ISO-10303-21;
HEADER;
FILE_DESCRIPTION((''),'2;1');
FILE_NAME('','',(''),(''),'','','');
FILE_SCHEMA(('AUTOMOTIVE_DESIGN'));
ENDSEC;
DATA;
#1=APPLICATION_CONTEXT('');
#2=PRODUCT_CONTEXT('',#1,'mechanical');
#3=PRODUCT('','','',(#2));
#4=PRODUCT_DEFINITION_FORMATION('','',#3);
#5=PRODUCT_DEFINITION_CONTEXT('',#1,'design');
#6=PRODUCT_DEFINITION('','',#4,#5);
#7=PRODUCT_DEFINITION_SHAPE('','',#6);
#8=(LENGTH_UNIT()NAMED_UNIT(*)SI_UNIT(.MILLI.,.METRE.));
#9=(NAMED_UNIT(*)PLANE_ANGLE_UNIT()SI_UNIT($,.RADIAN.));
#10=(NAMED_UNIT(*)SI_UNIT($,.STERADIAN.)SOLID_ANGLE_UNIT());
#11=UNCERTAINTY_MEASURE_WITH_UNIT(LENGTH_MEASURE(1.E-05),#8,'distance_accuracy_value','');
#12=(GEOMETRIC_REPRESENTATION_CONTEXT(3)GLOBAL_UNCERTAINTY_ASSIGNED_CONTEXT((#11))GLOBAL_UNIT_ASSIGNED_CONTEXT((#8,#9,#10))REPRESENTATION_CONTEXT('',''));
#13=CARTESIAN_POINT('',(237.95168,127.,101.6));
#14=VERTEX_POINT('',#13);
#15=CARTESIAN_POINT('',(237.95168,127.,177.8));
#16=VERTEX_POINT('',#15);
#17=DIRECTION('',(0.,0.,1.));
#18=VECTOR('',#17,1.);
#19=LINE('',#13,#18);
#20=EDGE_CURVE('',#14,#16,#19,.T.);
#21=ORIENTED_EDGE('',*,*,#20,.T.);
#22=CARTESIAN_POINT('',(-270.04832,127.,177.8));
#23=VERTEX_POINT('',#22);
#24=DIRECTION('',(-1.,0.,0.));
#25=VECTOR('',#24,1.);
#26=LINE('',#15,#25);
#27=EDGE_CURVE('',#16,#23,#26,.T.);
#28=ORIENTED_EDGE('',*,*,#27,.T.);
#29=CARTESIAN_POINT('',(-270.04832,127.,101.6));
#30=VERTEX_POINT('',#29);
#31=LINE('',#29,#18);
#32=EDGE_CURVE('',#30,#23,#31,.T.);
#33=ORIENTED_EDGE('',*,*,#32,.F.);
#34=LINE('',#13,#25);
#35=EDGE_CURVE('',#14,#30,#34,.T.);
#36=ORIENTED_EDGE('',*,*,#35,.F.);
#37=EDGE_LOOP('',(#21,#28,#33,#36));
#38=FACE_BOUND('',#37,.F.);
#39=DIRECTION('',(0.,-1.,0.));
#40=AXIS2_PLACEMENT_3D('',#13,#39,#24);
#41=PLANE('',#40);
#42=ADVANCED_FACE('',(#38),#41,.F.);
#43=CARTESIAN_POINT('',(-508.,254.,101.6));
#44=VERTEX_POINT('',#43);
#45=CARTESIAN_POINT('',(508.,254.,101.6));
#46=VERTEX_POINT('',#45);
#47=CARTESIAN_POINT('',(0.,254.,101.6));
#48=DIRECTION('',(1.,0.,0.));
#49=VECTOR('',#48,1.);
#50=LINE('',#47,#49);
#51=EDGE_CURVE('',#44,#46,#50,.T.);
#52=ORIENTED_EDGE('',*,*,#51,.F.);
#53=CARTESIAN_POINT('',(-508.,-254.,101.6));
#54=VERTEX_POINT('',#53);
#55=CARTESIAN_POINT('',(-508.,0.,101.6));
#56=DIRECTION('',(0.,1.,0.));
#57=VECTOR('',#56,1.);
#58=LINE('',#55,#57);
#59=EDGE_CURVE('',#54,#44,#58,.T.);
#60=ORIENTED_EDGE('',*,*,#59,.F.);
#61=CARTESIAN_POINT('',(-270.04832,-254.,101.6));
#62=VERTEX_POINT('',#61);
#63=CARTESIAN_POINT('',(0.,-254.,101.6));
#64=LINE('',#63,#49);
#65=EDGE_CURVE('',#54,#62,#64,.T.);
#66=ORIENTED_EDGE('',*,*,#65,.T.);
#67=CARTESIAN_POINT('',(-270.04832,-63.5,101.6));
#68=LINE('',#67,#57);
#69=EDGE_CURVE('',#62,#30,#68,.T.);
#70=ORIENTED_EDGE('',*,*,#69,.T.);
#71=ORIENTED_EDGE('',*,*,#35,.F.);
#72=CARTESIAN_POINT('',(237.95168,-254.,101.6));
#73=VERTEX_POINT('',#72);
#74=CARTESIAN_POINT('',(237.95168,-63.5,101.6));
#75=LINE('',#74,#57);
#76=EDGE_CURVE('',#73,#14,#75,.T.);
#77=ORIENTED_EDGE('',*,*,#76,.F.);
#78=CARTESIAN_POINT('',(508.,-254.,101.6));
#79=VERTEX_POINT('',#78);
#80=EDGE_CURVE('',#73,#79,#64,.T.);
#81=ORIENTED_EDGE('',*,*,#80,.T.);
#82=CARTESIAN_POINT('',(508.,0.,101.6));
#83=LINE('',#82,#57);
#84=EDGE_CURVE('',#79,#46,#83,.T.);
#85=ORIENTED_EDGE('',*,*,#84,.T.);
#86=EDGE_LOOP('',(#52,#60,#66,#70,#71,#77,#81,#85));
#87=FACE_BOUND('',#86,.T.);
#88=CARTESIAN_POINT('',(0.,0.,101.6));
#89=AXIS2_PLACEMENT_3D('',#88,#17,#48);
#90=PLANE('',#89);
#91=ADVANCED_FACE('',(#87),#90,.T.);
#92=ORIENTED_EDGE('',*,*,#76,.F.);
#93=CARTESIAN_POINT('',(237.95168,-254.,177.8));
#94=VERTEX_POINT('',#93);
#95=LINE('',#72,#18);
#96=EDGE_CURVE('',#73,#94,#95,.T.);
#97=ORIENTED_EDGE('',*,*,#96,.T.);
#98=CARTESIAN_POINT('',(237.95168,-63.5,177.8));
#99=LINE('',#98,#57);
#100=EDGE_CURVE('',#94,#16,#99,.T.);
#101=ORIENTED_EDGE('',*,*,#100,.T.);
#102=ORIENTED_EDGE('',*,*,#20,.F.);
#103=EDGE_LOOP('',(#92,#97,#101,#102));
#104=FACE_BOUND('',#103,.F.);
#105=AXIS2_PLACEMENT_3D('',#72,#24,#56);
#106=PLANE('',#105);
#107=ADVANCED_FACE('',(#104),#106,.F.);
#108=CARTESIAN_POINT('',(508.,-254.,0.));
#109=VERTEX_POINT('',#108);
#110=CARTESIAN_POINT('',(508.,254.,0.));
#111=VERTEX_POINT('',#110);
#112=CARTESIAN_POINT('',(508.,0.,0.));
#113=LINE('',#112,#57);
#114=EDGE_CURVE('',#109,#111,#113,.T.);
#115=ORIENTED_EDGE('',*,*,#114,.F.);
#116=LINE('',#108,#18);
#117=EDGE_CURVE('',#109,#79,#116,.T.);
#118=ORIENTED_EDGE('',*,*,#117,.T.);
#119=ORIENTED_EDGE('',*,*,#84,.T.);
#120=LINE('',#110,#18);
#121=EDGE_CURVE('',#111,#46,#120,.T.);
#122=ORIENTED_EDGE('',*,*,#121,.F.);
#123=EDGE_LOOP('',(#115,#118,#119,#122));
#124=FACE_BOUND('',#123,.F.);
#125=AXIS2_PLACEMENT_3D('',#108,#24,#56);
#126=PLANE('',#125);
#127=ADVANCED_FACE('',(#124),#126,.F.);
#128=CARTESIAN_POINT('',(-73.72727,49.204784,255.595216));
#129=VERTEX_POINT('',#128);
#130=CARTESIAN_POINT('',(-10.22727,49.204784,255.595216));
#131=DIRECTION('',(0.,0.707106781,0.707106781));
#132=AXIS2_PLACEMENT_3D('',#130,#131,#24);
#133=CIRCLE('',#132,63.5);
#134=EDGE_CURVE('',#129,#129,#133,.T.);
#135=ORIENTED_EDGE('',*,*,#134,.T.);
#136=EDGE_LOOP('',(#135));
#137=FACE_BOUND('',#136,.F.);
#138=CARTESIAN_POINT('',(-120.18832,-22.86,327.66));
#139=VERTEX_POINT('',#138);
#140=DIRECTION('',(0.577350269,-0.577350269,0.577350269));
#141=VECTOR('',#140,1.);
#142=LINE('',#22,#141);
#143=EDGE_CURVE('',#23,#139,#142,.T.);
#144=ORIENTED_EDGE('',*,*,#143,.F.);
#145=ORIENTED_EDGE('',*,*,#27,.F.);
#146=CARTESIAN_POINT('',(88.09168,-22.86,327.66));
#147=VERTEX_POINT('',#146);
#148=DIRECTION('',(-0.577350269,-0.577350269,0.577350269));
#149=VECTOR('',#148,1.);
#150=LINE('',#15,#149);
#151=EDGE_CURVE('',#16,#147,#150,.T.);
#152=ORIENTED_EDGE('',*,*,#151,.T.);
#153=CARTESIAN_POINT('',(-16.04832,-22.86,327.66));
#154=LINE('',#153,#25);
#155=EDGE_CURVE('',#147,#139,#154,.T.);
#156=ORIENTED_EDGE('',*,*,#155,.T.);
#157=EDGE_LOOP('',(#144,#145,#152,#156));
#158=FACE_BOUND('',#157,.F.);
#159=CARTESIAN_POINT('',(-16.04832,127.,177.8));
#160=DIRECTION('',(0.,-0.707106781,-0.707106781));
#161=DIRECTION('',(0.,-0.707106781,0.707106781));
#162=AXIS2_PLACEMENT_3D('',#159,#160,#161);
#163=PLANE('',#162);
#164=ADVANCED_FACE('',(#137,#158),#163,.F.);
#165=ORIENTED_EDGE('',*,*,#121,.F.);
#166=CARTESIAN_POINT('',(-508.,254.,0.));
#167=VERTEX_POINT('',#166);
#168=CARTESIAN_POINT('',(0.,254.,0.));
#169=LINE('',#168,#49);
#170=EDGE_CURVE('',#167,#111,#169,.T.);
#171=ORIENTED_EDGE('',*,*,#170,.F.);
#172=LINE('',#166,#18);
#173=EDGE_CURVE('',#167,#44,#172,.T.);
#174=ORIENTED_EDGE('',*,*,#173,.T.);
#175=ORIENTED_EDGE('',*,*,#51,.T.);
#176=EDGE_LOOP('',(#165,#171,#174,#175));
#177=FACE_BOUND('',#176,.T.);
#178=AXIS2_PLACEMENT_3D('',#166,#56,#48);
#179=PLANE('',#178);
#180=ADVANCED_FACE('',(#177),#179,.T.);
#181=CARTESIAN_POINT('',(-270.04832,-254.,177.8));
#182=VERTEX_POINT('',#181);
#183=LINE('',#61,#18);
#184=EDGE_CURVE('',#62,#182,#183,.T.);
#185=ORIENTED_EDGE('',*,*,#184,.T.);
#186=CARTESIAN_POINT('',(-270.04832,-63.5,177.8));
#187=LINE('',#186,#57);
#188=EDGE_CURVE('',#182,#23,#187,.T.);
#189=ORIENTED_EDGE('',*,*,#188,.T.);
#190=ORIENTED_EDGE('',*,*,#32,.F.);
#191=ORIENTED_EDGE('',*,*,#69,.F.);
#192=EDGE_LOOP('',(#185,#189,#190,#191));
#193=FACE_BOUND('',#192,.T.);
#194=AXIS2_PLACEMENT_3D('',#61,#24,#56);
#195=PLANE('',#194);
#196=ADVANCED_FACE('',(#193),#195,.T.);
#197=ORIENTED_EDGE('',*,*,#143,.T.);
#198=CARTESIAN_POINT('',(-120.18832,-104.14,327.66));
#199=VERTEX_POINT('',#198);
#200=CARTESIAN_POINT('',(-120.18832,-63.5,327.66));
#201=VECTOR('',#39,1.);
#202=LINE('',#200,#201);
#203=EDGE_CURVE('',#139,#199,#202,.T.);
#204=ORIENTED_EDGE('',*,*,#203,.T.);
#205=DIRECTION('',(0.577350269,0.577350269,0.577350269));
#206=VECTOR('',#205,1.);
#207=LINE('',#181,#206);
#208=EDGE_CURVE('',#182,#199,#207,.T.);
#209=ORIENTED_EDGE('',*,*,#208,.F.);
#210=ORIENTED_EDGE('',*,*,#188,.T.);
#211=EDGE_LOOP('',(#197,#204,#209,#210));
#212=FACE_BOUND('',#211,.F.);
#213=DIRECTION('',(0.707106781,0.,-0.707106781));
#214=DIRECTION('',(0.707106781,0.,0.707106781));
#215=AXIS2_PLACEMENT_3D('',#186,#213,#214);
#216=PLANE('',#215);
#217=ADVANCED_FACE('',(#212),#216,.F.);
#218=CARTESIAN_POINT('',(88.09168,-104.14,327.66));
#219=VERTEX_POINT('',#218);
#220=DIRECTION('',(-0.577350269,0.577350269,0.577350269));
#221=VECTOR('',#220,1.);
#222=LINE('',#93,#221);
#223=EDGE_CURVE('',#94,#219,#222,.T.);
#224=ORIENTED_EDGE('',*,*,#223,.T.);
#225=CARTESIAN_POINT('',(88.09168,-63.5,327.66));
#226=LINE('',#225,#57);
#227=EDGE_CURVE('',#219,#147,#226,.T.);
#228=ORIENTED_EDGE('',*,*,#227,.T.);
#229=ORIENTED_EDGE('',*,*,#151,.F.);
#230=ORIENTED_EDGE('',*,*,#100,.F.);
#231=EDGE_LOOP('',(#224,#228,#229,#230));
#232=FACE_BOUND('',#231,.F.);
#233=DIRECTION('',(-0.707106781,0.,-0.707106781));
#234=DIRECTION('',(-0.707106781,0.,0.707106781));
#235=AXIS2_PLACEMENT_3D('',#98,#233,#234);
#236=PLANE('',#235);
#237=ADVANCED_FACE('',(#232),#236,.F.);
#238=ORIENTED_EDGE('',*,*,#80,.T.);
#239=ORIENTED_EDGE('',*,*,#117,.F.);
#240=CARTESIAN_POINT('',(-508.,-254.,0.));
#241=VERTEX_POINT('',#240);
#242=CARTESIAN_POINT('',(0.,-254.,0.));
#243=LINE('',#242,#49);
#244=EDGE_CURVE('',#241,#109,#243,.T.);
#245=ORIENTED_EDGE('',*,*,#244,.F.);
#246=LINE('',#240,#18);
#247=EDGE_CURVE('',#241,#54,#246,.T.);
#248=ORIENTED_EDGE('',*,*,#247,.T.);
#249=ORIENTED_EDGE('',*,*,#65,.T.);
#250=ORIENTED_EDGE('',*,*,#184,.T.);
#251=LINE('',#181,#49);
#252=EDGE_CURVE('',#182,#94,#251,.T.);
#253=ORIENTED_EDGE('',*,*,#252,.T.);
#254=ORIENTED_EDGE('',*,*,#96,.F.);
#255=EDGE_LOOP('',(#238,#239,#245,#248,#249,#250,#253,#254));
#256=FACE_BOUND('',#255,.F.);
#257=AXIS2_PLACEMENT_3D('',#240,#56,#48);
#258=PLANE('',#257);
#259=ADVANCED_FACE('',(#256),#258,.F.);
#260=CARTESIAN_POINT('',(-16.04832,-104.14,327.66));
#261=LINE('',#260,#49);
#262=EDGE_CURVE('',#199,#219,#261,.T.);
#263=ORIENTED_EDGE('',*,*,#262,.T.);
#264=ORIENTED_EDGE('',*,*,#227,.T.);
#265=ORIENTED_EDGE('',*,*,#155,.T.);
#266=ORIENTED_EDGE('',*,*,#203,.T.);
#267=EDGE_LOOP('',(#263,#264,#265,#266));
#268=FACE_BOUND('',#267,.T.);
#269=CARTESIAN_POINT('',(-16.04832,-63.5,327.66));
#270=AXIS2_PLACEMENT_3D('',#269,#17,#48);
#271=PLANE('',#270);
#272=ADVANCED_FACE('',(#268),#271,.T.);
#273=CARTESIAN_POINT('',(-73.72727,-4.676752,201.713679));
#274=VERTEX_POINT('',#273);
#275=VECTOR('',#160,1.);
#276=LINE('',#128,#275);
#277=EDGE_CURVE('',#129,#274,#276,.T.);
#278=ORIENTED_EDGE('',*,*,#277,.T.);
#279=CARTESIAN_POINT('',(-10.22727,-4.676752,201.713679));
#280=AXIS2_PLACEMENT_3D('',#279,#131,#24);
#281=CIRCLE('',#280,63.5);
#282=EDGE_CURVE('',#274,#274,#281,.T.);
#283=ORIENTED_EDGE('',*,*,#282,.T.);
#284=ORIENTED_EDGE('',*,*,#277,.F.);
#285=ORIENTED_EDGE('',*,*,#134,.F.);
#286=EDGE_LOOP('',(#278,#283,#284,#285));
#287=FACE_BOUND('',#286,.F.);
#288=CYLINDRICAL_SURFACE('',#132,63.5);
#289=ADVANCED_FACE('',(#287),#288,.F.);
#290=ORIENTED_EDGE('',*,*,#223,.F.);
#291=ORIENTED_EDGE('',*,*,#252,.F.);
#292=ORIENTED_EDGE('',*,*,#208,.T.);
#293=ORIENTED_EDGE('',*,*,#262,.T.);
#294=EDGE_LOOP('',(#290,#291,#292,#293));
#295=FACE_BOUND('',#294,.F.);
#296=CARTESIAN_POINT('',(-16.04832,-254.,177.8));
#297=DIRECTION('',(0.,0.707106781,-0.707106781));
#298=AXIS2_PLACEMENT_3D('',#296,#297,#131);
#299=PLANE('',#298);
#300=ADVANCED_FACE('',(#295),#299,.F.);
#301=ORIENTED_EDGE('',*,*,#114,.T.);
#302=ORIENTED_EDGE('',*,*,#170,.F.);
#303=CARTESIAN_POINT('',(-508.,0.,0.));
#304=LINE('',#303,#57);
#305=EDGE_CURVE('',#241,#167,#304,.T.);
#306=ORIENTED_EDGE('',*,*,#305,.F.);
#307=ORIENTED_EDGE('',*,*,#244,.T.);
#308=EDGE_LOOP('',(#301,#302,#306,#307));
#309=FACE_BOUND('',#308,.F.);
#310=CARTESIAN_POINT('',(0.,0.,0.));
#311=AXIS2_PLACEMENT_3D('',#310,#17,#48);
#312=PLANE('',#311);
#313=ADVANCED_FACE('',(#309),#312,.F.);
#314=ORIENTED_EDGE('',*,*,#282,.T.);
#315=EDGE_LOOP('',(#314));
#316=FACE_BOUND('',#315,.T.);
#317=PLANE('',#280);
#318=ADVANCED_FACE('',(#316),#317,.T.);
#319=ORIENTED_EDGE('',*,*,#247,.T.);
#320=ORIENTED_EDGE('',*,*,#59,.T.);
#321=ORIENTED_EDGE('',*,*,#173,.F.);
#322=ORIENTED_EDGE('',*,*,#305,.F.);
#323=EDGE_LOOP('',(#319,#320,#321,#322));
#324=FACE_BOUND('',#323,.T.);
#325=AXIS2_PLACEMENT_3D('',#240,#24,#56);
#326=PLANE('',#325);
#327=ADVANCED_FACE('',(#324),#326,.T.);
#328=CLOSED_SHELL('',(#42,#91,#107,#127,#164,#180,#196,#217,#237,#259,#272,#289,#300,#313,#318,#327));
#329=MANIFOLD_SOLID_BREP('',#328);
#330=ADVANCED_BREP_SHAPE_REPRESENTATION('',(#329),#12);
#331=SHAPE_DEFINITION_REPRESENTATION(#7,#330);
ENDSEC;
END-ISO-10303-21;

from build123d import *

# Parameters (mm, degrees)
F0_W      = 1016
F0_H      = 508
F1_DEPTH  = 101.6
F4_W      = 237.9516797066
F4_H      = 381
F4_W_2    = 270.0483202934
F5_DEPTH  = 76.2
F5_FACE_W = 508
F5_FACE_H = 381
F6_DEPTH  = 149.86
F6_TAPER  = 45
F7_R      = 63.5
F8_DEPTH  = 76.2


# Not quite as in the source:
# - the program builds the solid bodies; features that only make, move or delete a surface that nothing else refers to are left out


with BuildPart() as f1:
    # F0 (on Top) → F1 (new body)
    with BuildSketch(Plane.XY):
        Rectangle(F0_W, F0_H)
    extrude(amount=F1_DEPTH)

    # F4 (on face) → F5 (join)
    with BuildSketch(Plane.XY.offset(101.6)):
        with Locations((118.9758398533, -63.5)):
            Rectangle(F4_W, F4_H)
        with Locations((-135.0241601467, -63.5)):
            Rectangle(F4_W_2, F4_H)
    extrude(amount=F5_DEPTH)

    # F5_face (on face) → F6 (join, symmetric)
    with BuildSketch(Plane(origin=(-16.0483202934, -63.5, 177.8), x_dir=(1, 0, 0), z_dir=(0, 0, 1))):
        Rectangle(F5_FACE_W, F5_FACE_H)
    extrude(amount=F6_DEPTH, both=True, taper=F6_TAPER)

    # F7 (on face) → F8 (cut)
    with BuildSketch(Plane(origin=(0, 152.4, 152.4), x_dir=(-1, 0, 0), z_dir=(0, 0.7071067812, 0.7071067812))):
        with Locations((10.2272699534, 145.9400733915)):
            Circle(F7_R)
    extrude(amount=-F8_DEPTH, mode=Mode.SUBTRACT)


solid = f1.part
